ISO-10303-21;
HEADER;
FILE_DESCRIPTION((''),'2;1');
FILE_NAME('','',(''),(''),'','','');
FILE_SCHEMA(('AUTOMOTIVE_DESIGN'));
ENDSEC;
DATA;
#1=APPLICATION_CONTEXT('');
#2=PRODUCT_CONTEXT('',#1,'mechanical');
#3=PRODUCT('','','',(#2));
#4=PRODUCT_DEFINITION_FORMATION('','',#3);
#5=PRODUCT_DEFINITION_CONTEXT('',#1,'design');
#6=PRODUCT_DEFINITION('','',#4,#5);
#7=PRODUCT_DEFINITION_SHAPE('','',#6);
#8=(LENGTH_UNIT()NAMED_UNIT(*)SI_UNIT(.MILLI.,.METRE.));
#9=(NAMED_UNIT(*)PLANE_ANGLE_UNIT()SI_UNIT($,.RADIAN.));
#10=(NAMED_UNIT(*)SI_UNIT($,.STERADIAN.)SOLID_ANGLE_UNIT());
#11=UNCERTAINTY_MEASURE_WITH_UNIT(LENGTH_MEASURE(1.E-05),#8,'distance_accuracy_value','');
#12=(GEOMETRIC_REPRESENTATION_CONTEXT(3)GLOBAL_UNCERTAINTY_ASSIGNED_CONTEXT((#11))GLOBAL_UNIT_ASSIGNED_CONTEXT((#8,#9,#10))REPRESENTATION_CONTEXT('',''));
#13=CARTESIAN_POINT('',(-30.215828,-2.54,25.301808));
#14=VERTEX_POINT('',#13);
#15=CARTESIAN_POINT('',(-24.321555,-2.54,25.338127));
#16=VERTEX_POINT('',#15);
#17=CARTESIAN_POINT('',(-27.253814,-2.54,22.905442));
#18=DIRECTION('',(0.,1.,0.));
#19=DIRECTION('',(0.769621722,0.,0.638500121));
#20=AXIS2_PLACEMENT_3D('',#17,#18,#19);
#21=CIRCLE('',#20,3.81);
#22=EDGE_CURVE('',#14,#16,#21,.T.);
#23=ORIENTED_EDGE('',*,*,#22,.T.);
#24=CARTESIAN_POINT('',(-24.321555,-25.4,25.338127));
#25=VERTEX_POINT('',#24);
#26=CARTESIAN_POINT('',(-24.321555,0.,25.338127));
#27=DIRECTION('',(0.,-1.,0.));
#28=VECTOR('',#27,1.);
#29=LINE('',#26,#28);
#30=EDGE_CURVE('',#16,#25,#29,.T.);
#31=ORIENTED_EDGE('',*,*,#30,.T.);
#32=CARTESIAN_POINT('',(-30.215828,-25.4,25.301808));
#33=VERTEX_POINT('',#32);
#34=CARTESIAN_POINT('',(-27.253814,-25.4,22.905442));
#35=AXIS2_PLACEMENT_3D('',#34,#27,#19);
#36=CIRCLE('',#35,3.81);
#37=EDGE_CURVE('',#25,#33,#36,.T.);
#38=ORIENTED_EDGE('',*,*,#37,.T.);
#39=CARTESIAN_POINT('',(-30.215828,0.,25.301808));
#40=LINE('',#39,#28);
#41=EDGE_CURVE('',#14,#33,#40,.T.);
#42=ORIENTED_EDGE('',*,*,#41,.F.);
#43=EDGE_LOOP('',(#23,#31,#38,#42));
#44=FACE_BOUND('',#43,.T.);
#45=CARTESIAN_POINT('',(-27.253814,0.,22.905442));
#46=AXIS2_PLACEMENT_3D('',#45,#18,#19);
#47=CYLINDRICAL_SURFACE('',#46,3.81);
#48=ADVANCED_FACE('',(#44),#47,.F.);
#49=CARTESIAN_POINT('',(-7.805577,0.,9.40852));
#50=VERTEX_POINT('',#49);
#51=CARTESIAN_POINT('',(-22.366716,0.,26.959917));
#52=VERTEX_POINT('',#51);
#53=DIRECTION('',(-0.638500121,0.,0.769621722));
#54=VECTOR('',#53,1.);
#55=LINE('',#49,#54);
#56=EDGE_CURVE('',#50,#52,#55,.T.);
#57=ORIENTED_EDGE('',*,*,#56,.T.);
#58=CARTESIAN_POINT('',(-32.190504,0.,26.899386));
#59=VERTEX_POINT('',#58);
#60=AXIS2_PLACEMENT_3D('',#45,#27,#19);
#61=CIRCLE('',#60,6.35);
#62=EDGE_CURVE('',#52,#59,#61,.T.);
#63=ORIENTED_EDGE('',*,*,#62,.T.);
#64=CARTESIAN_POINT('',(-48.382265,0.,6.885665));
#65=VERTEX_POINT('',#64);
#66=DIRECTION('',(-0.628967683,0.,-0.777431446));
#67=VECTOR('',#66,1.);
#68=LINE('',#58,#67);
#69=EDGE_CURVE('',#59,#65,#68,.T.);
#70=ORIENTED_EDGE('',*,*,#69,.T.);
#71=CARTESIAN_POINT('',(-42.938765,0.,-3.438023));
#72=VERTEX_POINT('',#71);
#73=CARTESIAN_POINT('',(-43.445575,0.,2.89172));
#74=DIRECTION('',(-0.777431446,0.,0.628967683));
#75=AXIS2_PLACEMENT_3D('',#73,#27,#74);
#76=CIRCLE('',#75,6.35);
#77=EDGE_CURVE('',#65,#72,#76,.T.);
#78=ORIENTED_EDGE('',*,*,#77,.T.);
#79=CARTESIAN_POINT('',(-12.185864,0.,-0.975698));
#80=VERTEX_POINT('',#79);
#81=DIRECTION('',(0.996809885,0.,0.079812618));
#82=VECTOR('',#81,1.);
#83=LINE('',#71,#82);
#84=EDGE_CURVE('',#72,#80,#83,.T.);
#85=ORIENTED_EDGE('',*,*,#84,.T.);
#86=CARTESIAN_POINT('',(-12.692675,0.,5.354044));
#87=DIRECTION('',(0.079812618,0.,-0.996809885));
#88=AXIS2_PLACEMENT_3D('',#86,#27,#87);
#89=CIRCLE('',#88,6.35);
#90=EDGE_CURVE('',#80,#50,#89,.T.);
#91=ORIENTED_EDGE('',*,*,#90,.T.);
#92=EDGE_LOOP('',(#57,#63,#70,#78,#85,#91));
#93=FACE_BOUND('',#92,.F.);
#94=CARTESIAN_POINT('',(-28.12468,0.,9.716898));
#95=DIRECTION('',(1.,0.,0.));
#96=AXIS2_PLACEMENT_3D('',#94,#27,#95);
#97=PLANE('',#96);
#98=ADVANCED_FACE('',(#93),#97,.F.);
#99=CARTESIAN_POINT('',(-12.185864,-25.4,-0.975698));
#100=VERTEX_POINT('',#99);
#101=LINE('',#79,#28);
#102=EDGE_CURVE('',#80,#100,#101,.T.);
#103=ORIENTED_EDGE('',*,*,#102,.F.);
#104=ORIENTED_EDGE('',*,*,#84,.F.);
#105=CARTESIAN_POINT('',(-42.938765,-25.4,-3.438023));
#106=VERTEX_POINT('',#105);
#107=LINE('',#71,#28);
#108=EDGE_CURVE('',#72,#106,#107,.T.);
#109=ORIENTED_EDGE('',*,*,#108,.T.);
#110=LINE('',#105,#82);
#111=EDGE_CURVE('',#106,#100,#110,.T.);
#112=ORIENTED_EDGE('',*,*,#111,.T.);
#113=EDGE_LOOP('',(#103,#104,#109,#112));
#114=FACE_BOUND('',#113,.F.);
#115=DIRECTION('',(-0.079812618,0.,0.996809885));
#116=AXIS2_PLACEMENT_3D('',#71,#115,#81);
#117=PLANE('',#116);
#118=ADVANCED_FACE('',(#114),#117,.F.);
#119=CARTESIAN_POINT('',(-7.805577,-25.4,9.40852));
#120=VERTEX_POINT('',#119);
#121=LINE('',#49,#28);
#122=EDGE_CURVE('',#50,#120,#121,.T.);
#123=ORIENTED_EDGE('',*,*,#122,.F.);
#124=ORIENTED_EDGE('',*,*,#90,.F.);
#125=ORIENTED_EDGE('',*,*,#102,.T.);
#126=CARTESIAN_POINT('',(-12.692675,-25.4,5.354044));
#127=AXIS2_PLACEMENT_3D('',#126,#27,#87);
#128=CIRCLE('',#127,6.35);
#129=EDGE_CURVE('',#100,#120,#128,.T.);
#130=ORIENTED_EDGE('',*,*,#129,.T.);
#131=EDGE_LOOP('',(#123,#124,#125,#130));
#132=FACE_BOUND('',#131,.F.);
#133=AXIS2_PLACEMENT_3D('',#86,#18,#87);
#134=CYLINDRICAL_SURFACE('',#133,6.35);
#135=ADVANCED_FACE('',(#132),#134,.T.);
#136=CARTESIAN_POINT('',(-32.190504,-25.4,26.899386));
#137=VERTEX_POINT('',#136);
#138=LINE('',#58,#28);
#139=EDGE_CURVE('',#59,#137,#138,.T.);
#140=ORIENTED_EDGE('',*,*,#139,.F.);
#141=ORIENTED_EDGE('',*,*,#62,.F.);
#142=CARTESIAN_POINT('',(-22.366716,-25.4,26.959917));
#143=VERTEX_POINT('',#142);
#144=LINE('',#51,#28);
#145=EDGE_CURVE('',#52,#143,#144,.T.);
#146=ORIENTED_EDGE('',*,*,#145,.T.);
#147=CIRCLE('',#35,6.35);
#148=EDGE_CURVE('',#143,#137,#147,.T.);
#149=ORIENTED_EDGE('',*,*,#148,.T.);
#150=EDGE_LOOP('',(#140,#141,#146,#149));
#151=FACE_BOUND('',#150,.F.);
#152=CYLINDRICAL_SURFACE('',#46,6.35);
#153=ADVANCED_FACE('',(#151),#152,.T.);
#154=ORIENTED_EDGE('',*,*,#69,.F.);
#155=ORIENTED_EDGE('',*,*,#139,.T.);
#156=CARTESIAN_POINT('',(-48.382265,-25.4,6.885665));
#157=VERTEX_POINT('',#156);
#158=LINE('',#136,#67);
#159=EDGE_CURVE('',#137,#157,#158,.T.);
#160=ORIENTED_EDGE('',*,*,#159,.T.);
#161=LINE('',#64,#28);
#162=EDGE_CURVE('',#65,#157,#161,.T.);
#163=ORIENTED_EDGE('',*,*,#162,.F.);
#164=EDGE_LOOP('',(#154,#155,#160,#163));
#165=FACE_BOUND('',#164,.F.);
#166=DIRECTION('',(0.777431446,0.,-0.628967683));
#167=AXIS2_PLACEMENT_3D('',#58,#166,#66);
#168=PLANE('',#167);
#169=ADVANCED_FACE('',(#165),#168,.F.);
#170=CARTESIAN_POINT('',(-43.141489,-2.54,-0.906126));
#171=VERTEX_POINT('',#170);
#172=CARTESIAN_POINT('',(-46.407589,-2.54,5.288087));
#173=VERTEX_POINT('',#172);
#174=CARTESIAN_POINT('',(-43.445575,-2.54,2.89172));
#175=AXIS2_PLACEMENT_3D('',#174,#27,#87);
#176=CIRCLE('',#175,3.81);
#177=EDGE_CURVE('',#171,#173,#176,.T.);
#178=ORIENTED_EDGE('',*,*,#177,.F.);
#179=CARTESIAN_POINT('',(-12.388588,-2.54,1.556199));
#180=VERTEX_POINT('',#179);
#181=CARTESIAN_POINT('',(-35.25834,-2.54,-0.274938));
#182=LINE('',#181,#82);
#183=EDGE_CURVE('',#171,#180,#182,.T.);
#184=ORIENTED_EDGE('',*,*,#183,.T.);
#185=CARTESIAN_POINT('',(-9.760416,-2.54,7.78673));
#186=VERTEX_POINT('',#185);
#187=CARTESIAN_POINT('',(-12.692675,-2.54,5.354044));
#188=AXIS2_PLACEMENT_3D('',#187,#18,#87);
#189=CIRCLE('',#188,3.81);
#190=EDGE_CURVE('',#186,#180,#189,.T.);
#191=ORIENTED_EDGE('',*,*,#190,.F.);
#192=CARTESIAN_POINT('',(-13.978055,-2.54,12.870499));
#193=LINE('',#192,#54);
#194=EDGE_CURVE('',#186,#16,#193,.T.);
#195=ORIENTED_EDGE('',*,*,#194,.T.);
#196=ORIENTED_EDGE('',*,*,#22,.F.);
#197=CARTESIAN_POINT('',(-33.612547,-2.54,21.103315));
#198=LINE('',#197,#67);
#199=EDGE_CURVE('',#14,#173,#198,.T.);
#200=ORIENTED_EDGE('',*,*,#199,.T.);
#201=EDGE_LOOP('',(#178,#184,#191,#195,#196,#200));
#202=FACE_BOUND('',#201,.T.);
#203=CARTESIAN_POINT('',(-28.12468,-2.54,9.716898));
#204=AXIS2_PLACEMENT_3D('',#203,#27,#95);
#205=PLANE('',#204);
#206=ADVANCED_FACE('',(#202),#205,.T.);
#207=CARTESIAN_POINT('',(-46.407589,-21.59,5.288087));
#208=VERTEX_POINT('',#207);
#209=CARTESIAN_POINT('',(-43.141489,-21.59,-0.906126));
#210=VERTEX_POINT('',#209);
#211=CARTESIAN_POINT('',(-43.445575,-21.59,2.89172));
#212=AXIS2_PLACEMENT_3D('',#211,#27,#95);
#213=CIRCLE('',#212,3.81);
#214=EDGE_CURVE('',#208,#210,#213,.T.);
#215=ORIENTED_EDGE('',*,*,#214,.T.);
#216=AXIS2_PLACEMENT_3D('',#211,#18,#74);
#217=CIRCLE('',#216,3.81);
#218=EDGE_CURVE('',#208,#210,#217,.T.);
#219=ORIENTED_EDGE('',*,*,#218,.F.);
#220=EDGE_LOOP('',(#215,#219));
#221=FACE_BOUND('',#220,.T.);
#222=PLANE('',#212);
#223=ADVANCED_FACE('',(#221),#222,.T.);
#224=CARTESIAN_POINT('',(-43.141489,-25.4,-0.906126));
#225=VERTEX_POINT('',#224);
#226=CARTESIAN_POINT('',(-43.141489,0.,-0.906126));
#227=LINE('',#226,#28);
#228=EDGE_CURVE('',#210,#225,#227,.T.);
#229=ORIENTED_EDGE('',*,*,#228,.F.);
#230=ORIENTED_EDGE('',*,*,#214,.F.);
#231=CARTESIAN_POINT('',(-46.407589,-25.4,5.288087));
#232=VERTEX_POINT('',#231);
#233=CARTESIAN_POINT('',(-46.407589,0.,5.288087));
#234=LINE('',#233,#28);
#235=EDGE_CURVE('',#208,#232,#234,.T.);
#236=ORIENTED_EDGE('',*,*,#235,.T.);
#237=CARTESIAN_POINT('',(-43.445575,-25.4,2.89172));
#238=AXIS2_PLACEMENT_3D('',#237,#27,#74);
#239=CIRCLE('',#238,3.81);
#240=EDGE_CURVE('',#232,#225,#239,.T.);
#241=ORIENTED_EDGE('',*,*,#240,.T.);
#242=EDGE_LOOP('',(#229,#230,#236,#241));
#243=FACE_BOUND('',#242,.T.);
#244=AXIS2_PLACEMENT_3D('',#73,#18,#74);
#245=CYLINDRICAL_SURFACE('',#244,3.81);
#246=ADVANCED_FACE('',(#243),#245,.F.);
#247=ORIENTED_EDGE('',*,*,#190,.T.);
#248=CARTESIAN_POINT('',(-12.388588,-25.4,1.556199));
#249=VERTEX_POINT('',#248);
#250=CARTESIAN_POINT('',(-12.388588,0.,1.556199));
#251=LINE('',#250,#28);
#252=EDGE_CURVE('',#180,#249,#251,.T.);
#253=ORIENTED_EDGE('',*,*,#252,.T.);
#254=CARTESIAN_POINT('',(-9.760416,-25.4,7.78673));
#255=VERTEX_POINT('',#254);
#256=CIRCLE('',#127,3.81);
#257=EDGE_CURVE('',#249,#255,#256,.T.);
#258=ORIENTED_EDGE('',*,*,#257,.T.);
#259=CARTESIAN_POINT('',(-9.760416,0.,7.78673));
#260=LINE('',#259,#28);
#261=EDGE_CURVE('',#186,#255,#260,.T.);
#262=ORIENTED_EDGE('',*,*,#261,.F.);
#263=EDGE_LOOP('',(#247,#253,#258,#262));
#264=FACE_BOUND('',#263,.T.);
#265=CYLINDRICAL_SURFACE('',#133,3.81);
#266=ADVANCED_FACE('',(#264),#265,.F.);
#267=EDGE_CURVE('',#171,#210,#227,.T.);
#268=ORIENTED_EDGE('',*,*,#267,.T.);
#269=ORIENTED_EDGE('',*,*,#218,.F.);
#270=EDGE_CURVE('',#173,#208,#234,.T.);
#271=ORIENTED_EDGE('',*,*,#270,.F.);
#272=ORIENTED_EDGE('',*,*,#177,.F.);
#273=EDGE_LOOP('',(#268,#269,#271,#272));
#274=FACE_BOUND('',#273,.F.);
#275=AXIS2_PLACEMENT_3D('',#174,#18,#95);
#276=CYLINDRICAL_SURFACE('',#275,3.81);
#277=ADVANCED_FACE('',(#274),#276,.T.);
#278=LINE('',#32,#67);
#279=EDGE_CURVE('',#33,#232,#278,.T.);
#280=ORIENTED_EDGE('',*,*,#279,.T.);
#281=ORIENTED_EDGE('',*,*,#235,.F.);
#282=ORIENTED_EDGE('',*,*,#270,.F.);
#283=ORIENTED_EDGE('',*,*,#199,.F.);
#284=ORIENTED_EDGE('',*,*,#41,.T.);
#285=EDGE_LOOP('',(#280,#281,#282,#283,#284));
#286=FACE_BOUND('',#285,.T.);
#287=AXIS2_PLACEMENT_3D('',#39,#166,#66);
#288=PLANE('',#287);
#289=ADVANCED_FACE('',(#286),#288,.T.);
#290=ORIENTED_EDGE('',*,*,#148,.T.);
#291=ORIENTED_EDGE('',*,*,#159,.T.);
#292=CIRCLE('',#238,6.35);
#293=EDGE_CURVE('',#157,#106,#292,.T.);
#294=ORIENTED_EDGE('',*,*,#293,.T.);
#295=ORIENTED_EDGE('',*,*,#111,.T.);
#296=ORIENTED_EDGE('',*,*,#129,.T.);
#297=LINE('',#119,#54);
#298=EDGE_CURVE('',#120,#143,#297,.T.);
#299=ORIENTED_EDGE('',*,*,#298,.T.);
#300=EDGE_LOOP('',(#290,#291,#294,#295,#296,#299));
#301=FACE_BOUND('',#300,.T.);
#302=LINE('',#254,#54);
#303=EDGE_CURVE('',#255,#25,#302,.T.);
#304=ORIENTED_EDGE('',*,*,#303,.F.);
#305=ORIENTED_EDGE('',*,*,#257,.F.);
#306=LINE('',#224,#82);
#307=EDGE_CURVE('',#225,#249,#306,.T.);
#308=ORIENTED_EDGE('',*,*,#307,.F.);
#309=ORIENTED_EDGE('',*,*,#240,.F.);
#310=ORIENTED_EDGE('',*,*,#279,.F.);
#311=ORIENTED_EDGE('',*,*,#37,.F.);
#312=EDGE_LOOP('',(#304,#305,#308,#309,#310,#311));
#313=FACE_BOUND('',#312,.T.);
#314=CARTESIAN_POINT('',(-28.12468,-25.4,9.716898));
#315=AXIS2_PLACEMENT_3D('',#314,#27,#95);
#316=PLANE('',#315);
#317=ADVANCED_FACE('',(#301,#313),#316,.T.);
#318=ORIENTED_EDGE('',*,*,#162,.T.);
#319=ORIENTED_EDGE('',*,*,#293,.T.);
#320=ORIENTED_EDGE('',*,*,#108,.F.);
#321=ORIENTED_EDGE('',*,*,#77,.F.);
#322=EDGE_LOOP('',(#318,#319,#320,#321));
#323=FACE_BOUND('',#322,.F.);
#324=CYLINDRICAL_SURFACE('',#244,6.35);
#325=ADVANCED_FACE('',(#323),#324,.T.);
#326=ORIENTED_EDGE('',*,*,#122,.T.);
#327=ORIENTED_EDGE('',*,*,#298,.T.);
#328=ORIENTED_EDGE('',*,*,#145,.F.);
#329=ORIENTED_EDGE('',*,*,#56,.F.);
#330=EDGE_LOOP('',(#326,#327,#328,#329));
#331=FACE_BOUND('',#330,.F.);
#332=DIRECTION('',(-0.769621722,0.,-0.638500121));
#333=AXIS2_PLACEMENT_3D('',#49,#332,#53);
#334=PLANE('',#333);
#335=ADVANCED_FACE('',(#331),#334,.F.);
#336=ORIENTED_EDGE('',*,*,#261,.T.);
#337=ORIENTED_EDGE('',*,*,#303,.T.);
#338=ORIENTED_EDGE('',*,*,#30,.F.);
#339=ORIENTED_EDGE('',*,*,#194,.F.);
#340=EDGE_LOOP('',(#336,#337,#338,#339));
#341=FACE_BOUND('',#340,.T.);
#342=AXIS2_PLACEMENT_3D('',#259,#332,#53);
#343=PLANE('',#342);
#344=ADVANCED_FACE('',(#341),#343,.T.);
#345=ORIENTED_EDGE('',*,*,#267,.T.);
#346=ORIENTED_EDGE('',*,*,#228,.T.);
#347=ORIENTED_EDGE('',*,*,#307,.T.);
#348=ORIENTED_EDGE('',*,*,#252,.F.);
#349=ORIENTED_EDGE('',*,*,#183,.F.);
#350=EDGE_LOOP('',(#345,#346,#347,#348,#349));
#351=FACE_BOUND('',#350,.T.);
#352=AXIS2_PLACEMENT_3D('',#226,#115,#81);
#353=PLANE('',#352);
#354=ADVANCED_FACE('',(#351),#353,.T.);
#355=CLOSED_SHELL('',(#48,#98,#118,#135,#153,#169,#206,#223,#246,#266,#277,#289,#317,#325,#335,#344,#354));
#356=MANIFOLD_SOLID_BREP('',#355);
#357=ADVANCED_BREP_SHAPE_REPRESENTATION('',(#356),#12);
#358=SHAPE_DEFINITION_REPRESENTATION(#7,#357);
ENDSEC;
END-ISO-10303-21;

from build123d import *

# Parameters (mm, degrees)
F1_DEPTH = 25.4
F2_T     = -2.54
F3_R     = 3.81
F4_DEPTH = 19.05


# Not quite as in the source:
# - the program builds the solid bodies; features that only make, move or delete a surface that nothing else refers to are left out


with BuildPart() as f1:
    # F0 (on Front) → F1 (new body)
    with BuildSketch(Plane.XZ):
        with BuildLine():
            ThreePointArc((-12.1858643886, -0.9756983319), (-6.8419002324, 2.8860613911), (-7.8055765775, 9.4085202038))
            Line((-7.8055765775, 9.4085202038), (-22.3667159803, 26.9599173237))
            ThreePointArc((-22.3667159803, 26.9599173237), (-27.2929398052, 29.2553210157), (-32.1905035986, 26.8993863451))
            Line((-32.1905035986, 26.8993863451), (-48.3822646253, 6.8856646257))
            ThreePointArc((-48.3822646253, 6.8856646257), (-49.0625660789, -0.0700213051), (-42.9387648181, -3.4380229313))
            Line((-42.9387648181, -3.4380229313), (-12.1858643886, -0.9756983319))
        make_face()
    extrude(amount=F1_DEPTH)

    # F2
    f2_openings = [f1.faces().sort_by_distance(p)[0] for p in [
        (-28.02144, -25.4, 9.948419),
    ]]
    offset(amount=F2_T, openings=f2_openings)

    # F3 (on face) → F4 (join)
    with BuildSketch(Plane.XZ.offset(2.54)):
        with Locations((-43.4455749435, 2.8917198357)):
            Circle(F3_R)
    extrude(amount=F4_DEPTH)


solid = f1.part
